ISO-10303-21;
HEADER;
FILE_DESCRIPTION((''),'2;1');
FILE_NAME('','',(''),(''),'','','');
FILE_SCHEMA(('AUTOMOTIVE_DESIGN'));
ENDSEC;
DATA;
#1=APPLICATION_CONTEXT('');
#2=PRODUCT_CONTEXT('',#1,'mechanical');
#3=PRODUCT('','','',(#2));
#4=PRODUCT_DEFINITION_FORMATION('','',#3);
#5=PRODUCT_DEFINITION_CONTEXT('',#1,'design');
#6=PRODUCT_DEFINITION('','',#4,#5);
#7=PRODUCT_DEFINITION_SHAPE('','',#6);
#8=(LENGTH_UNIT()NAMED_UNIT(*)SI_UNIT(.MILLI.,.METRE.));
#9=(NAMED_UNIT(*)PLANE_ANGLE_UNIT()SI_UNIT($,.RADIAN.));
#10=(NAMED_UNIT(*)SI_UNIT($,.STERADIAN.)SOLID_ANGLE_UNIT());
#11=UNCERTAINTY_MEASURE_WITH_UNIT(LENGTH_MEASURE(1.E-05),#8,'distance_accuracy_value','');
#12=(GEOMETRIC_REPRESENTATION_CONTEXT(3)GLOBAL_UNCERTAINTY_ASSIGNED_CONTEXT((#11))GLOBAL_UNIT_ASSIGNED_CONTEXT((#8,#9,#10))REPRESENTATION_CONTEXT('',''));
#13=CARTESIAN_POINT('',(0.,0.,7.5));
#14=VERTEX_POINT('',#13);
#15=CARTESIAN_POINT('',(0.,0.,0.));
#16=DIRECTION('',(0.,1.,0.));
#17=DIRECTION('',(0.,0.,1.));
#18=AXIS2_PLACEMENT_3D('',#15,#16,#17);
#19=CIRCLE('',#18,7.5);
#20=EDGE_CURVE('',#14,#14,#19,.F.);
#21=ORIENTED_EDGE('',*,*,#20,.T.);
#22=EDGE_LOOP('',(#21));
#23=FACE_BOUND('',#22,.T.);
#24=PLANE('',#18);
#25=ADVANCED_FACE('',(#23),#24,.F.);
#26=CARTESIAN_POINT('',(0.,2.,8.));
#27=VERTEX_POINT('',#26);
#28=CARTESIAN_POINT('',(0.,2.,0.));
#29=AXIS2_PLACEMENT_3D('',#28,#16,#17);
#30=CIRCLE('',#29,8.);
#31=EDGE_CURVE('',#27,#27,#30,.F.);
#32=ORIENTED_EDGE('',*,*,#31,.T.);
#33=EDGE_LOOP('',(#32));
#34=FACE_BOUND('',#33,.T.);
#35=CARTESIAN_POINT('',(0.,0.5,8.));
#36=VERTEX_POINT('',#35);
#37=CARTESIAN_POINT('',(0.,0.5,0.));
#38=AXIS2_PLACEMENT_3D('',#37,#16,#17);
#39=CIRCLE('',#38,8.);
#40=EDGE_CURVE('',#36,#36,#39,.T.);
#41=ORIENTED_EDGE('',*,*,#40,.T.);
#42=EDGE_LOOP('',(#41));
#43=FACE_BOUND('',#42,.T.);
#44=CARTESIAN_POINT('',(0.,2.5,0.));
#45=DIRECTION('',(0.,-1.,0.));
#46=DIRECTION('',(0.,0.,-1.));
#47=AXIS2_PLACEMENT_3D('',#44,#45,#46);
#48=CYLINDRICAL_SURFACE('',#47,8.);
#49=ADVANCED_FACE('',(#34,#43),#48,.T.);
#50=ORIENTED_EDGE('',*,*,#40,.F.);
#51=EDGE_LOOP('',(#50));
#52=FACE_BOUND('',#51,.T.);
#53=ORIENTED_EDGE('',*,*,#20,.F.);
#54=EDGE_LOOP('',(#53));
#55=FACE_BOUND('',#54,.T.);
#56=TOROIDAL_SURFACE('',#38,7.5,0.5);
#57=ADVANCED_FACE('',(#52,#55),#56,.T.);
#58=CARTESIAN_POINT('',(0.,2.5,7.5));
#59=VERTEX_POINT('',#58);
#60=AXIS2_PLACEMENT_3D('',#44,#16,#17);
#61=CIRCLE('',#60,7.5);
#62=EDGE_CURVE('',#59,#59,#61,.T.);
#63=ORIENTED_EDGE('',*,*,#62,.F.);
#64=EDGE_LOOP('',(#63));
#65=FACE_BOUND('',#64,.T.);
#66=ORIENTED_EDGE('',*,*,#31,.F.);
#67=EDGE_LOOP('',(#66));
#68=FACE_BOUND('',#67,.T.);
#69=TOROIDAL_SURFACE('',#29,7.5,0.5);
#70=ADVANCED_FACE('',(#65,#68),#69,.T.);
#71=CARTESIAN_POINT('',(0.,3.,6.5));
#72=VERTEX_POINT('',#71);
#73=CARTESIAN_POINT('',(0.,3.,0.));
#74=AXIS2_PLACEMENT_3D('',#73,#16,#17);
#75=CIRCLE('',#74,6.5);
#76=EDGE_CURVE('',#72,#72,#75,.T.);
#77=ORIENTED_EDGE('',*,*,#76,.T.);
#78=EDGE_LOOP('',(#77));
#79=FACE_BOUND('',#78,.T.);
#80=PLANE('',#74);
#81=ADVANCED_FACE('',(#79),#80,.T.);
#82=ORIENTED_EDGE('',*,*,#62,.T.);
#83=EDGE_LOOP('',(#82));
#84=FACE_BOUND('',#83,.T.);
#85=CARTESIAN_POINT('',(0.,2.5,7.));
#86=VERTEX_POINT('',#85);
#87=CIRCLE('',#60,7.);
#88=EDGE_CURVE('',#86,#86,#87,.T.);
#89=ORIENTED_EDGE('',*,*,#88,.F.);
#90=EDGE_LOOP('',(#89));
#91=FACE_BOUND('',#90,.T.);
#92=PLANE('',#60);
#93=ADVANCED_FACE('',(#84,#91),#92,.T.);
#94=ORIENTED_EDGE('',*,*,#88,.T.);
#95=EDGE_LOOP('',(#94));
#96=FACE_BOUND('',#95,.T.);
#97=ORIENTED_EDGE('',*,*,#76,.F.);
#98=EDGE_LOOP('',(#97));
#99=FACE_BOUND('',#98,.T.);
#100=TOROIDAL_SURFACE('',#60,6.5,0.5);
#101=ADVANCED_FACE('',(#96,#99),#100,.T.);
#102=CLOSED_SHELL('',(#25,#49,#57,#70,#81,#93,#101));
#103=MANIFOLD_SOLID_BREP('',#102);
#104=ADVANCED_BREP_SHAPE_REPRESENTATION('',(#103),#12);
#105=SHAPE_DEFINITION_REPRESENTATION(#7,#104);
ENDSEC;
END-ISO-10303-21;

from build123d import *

# Parameters (mm, degrees)
SKETCH1_R           = 8
BOSS_EXTRUDE1_DEPTH = 2.5
SKETCH2_R           = 7
BOSS_EXTRUDE2_DEPTH = 0.5
FILLET1_R           = 0.5


with BuildPart() as part:
    # Sketch1 → Boss-Extrude1 (new body)
    with BuildSketch(Plane(origin=(0, 0, 0), x_dir=(1, 0, 0), z_dir=(0, 1, 0))):
        with Locations(Location((0, 0, 0), (0, 0, 270))):
            Circle(SKETCH1_R)
    extrude(amount=BOSS_EXTRUDE1_DEPTH)

    # Sketch2 → Boss-Extrude2 (add)
    with BuildSketch(Plane(origin=(0, 2.5, 0), x_dir=(1, 0, 0), z_dir=(0, 1, 0))):
        with Locations(Location((0, 0, 0), (0, 0, 270))):
            Circle(SKETCH2_R)
    extrude(amount=BOSS_EXTRUDE2_DEPTH)

    # Fillet1
    fillet1_edges = [part.edges().sort_by_distance(p)[0] for p in [
        (0, 0, -8),
        (0, 2.5, -8),
        (0, 3, -7),
    ]]
    fillet(fillet1_edges, radius=FILLET1_R - 0.0001)  # a hair under: the kernel refuses the full size


solid = part.part
